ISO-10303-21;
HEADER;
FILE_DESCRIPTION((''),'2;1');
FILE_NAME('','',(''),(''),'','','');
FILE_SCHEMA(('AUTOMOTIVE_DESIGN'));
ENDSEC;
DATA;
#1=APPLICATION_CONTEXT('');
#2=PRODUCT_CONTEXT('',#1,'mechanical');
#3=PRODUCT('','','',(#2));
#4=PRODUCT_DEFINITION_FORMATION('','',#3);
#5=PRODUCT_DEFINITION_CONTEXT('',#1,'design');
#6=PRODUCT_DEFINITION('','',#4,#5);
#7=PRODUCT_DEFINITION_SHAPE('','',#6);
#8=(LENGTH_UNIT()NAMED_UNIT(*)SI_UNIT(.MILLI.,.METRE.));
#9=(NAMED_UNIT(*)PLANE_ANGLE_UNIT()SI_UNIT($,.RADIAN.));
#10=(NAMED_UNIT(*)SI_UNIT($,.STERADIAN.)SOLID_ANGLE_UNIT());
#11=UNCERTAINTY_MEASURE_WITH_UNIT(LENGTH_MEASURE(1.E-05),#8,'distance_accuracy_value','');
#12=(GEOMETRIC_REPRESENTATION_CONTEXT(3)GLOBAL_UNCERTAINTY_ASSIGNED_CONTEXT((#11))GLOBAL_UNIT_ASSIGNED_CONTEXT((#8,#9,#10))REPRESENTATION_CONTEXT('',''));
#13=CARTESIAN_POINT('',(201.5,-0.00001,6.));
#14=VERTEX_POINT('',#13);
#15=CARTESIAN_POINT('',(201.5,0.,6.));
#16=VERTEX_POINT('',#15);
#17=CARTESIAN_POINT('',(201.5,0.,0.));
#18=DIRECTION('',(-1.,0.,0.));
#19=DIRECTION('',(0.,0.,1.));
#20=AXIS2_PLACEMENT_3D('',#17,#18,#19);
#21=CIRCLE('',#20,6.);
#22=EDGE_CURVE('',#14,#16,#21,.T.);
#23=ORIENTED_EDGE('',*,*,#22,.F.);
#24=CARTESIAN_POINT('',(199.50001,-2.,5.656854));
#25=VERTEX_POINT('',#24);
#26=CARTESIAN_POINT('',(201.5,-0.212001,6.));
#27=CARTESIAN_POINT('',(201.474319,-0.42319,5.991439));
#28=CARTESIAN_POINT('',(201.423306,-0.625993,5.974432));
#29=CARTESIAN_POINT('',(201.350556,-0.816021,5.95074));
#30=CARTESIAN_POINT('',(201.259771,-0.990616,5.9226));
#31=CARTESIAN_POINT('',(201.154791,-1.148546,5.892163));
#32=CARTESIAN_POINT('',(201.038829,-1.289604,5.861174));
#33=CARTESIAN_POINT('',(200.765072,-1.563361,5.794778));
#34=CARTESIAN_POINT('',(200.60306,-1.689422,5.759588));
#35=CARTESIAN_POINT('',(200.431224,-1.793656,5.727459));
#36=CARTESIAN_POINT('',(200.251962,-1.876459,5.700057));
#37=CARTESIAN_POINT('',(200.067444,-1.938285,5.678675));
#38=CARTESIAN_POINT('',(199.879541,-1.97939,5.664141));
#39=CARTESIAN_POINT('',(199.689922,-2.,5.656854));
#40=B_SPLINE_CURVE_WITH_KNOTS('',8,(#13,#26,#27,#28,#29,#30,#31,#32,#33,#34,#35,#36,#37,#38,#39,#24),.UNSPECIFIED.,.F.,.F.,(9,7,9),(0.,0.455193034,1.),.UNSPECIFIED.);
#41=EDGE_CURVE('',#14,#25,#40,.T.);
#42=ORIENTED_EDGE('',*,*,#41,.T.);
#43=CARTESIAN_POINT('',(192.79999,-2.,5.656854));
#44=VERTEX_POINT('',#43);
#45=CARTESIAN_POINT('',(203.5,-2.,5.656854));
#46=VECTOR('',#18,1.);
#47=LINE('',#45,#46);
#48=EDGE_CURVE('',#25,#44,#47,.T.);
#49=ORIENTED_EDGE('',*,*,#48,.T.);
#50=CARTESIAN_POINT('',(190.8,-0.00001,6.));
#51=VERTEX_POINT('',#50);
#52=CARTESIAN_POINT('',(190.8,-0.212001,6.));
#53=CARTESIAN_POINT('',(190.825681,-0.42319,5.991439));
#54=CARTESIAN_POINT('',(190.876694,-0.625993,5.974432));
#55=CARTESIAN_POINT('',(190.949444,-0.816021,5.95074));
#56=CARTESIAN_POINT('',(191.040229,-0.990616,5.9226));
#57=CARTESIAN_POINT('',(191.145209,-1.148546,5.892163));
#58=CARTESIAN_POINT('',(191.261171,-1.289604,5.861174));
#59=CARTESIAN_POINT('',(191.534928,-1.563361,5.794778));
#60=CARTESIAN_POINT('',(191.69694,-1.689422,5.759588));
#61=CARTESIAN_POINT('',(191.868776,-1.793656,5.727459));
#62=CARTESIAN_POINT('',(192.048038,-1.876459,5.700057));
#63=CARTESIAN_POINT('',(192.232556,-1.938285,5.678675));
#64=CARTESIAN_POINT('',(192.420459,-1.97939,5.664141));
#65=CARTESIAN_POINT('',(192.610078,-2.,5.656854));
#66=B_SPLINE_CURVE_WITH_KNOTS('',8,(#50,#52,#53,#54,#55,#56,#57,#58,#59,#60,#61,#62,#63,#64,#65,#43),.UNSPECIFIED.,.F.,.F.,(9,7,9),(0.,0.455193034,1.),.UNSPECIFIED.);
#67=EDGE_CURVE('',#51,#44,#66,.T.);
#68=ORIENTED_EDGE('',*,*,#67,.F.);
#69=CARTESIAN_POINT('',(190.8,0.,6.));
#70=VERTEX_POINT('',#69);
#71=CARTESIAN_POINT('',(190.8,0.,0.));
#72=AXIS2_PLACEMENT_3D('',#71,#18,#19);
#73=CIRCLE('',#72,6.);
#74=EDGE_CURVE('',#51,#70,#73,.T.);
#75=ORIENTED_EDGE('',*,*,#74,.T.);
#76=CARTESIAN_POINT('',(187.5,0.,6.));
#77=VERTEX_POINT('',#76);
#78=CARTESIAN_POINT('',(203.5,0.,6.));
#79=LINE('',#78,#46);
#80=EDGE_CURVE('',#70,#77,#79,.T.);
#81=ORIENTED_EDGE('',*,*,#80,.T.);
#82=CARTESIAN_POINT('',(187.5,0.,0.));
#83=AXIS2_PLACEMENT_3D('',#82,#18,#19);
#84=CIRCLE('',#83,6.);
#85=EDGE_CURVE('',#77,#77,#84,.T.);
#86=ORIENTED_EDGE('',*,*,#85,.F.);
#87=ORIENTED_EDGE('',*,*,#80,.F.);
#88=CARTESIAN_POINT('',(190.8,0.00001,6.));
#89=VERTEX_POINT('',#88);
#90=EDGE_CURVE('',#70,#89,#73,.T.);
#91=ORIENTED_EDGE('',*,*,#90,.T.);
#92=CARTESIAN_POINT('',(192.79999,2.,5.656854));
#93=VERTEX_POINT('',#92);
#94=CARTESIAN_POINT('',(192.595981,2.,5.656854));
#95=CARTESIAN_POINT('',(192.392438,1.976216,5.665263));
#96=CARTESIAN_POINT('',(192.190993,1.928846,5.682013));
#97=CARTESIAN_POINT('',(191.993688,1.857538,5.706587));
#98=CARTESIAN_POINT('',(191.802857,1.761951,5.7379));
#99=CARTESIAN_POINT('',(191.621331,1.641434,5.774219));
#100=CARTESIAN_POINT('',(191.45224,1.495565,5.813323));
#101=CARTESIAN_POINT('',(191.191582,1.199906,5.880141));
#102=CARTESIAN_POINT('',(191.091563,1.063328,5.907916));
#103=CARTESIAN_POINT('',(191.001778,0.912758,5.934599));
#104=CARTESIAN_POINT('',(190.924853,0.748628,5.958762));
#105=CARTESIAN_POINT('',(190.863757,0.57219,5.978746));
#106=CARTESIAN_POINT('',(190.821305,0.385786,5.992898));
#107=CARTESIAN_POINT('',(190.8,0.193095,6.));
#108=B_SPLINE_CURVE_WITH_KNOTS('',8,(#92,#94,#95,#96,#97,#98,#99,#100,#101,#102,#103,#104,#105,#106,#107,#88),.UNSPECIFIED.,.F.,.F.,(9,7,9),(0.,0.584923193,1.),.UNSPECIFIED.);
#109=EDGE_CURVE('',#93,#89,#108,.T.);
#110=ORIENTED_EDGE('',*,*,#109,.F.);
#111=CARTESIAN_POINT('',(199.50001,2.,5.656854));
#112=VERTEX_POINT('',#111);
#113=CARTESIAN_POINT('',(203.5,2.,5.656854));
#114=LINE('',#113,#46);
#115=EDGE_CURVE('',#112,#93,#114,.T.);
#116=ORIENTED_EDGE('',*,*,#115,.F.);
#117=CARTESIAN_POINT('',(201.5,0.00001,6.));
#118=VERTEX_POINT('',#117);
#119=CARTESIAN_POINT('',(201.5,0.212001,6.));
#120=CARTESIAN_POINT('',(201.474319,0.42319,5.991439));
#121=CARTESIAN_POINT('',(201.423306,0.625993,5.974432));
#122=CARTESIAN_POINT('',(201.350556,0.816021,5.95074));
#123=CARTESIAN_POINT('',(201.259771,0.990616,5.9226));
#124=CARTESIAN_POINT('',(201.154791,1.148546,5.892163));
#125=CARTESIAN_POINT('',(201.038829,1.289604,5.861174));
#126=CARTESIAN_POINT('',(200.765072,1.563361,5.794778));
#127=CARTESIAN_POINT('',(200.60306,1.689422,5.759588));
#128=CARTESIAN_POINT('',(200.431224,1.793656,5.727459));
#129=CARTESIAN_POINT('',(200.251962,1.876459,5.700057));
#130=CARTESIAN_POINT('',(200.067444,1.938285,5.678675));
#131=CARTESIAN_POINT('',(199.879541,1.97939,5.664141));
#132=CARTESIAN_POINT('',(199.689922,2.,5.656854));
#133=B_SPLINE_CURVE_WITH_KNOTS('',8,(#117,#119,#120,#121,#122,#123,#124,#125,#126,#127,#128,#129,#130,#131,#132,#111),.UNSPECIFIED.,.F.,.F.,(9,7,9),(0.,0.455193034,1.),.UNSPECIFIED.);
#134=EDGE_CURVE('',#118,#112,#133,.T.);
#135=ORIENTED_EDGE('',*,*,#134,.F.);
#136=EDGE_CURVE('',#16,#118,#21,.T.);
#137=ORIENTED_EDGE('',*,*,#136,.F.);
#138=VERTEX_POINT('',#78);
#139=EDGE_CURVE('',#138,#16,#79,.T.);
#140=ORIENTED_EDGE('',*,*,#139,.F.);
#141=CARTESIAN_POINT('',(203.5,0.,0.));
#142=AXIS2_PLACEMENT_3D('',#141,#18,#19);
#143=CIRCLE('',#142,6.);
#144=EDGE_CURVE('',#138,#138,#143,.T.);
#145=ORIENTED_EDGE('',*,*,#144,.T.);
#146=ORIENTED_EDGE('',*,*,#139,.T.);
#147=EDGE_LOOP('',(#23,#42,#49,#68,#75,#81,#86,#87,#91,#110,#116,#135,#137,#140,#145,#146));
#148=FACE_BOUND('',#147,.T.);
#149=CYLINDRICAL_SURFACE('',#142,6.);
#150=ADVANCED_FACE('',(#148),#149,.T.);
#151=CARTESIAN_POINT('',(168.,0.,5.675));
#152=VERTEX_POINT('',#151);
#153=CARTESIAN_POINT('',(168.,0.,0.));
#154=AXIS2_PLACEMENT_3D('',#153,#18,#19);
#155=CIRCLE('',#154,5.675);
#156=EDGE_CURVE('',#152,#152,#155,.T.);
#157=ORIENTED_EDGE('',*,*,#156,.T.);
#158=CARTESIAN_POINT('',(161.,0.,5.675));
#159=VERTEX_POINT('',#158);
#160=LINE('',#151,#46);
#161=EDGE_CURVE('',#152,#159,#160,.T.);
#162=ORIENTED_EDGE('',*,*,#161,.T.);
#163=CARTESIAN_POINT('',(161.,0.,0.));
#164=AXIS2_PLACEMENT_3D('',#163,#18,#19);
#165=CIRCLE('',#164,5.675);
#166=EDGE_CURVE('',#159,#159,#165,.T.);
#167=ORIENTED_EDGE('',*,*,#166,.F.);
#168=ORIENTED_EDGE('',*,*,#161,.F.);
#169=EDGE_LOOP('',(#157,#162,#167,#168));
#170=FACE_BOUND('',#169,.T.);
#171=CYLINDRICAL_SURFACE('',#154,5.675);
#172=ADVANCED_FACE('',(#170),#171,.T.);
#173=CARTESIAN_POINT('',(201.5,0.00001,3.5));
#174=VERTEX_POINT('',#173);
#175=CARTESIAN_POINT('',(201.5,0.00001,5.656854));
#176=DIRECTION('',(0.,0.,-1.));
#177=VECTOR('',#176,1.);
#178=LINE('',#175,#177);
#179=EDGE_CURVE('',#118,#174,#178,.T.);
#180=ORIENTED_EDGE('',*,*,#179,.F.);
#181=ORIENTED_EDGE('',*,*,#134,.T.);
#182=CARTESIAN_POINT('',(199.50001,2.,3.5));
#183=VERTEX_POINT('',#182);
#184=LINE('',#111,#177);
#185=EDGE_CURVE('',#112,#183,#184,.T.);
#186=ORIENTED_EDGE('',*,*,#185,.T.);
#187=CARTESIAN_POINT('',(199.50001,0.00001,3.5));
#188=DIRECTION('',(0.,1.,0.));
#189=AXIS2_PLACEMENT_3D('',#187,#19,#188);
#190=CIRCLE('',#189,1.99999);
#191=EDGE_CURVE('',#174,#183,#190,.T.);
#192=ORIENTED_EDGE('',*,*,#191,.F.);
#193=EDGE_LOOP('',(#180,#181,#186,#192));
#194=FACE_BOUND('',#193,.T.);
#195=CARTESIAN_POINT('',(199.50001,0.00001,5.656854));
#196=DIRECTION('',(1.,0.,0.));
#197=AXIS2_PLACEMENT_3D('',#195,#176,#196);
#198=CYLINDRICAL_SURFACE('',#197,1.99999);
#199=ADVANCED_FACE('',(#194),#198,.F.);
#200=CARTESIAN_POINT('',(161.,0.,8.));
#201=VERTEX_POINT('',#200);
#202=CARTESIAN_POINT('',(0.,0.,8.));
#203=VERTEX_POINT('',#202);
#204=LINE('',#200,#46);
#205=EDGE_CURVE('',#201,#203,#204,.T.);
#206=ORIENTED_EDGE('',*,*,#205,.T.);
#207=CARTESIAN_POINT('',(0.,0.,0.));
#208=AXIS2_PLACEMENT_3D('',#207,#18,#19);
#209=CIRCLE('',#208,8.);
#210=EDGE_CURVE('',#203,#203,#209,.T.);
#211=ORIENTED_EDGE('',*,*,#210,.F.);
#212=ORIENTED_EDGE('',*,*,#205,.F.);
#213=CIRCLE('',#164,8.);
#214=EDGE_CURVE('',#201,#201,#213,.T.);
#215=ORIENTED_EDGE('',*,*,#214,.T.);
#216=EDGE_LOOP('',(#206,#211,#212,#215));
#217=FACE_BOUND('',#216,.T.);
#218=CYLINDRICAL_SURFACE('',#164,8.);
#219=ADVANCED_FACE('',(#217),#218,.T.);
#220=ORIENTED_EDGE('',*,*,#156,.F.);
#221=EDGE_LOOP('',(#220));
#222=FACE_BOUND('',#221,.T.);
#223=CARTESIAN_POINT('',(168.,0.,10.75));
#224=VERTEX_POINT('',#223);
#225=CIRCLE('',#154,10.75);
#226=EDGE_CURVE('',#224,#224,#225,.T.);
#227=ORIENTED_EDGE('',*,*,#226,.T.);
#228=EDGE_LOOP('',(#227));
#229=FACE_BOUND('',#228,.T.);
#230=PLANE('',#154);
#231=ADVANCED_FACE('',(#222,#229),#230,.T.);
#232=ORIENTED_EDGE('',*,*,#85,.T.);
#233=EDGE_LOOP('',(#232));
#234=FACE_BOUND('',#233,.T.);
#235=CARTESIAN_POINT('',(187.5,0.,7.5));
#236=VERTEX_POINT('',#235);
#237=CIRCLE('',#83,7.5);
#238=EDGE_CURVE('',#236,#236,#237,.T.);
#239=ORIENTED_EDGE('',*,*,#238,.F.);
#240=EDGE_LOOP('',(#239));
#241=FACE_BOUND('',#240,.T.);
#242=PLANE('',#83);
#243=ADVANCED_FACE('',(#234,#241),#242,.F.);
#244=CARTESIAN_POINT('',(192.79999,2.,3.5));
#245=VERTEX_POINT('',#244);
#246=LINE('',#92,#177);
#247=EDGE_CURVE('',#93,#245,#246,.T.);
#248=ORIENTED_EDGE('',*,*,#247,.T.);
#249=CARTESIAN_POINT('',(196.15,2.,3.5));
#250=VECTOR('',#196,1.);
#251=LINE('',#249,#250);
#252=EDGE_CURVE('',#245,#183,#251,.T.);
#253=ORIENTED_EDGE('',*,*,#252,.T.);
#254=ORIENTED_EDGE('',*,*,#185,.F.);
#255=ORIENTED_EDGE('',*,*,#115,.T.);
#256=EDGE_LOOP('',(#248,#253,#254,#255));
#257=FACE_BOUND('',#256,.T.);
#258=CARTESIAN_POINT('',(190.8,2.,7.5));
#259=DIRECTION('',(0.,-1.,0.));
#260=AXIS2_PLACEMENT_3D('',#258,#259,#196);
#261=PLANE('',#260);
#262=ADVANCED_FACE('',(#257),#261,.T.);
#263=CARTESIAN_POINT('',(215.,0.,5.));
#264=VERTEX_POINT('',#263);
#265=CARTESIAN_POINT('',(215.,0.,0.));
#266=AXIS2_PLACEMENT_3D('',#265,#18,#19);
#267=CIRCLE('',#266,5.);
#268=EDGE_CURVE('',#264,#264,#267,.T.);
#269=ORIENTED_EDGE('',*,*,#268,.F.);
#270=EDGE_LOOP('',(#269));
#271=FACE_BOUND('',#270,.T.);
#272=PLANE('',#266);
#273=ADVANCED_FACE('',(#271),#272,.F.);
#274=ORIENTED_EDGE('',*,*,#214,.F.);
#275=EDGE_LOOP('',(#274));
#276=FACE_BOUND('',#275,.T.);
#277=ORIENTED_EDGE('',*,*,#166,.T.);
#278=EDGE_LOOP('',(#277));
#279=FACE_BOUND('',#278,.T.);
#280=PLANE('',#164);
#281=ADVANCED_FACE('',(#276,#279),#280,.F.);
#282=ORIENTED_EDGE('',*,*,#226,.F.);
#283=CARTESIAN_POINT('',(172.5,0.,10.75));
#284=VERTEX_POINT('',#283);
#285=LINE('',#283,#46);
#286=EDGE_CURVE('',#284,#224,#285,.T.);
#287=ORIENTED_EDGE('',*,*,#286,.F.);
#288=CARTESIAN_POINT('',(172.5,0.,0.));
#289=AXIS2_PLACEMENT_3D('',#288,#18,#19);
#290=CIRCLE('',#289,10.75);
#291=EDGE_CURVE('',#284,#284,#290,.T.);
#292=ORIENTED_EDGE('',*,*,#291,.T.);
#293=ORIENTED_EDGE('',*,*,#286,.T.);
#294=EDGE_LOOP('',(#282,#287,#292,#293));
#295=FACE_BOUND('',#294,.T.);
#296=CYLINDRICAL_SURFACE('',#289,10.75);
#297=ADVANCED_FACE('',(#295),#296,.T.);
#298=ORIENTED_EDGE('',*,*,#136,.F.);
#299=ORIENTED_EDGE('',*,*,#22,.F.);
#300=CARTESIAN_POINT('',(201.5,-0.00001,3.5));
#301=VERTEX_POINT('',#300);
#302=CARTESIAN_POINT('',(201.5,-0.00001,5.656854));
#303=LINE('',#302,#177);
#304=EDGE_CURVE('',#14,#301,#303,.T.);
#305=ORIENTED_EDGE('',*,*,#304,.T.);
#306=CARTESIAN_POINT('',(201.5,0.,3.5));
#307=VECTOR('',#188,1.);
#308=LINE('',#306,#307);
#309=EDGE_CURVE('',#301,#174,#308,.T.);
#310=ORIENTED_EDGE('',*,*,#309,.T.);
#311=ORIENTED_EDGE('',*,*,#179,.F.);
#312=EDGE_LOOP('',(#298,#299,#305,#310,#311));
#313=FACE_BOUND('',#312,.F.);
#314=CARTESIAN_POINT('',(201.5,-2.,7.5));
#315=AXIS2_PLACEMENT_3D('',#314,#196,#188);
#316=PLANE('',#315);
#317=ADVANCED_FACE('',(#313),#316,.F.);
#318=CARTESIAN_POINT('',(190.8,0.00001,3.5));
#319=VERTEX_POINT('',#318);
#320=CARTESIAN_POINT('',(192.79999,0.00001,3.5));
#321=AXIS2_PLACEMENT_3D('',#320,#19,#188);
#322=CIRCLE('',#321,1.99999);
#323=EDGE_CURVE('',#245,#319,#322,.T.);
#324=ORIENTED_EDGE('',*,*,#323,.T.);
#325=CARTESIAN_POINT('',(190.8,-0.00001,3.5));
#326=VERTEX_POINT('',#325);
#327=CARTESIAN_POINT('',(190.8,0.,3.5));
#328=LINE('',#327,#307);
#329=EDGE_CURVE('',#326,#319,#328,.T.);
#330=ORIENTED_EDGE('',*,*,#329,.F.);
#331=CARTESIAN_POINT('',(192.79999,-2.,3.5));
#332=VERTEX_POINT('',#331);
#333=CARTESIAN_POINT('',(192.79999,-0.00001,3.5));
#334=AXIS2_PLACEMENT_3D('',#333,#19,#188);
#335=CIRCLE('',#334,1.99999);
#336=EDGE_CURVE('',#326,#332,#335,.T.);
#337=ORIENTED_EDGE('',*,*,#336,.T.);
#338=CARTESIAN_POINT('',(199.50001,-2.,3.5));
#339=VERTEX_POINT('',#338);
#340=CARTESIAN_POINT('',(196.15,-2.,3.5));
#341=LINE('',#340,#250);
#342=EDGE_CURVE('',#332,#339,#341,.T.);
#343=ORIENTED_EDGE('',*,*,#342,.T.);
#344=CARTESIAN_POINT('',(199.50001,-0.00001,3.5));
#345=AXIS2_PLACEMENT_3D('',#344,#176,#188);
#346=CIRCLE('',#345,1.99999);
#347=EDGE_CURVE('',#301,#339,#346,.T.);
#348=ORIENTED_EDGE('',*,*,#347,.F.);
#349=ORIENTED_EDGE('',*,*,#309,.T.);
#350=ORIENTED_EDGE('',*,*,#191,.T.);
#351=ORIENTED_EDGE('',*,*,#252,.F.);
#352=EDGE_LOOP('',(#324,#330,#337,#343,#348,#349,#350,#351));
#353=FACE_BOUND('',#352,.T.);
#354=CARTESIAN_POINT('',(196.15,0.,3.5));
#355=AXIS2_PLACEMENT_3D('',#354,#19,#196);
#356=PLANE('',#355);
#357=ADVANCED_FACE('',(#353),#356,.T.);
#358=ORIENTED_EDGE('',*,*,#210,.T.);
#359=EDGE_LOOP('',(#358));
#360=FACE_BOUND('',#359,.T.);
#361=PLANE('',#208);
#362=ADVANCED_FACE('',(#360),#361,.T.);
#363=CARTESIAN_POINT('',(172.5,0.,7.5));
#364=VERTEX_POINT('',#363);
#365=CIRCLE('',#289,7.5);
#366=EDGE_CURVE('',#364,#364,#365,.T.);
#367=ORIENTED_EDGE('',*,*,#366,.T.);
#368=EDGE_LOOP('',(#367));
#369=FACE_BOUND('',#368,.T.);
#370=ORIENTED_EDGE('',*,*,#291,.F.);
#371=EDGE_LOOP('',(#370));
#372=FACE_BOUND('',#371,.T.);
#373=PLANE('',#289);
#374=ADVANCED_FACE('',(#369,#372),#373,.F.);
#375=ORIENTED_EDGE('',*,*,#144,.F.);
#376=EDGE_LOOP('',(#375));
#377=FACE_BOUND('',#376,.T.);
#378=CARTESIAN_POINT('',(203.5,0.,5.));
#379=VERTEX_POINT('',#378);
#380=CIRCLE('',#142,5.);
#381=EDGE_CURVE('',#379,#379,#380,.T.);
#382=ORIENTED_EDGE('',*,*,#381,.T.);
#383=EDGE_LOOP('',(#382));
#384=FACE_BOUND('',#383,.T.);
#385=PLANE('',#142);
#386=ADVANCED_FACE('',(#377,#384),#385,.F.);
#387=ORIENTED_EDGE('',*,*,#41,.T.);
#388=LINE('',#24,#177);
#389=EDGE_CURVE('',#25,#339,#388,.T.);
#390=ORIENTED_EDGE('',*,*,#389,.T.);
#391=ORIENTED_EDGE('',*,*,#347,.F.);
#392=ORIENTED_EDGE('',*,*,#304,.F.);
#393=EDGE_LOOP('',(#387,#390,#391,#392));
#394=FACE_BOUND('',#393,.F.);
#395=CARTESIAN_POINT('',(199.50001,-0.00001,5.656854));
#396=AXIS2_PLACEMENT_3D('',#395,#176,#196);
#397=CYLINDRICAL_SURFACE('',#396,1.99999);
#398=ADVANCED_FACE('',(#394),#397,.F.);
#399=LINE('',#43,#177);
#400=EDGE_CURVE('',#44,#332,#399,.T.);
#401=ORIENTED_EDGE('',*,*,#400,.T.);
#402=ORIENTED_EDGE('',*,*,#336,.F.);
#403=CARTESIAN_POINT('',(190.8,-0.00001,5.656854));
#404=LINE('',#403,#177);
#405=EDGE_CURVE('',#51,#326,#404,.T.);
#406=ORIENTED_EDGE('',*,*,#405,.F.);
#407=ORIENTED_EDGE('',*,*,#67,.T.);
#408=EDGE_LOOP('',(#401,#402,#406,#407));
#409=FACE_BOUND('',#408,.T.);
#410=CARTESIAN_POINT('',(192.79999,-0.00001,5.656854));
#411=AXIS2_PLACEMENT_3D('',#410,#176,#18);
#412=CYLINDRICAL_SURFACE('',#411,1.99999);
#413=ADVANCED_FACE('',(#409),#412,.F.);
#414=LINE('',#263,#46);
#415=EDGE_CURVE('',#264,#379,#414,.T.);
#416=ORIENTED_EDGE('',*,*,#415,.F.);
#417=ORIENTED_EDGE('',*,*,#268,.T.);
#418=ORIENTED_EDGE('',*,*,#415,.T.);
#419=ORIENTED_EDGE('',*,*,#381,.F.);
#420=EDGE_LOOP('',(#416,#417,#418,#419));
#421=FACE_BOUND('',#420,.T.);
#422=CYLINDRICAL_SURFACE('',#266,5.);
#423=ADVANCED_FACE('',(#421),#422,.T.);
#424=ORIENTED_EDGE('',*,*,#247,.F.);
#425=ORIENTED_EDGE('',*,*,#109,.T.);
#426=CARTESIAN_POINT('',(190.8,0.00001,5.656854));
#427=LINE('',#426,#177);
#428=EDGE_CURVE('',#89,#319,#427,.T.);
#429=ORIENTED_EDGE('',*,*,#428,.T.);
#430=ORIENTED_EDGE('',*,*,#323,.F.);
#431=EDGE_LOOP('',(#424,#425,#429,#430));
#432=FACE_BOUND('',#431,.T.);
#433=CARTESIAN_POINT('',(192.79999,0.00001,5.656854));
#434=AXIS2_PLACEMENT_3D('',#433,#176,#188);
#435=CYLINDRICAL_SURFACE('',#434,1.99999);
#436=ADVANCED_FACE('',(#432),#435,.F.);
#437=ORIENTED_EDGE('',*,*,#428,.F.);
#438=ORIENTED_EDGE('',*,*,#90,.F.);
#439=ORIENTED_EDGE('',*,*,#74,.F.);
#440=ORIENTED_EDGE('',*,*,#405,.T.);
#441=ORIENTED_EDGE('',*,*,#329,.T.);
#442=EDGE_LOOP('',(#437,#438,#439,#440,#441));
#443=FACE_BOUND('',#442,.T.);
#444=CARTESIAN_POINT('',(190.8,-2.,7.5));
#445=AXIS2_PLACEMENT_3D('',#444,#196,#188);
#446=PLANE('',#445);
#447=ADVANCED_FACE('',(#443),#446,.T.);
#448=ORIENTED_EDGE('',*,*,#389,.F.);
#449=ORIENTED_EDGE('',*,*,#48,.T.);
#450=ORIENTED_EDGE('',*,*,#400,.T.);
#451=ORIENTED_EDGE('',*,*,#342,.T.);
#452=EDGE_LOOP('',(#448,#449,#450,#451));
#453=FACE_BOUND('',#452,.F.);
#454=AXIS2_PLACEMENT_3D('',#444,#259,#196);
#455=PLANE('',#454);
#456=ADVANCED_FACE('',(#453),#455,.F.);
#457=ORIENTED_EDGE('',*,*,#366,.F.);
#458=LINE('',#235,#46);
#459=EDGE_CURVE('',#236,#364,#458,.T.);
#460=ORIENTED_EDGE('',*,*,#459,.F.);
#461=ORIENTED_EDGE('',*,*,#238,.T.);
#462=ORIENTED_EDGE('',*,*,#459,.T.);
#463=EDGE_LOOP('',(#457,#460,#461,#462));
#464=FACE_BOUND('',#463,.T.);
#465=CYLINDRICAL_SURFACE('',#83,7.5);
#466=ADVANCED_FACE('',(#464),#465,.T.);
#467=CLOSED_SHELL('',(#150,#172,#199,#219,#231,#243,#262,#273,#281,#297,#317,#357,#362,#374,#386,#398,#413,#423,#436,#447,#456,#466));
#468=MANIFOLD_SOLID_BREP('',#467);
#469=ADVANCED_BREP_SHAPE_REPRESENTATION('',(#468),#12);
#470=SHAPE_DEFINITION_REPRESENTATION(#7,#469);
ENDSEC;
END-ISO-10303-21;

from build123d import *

# Parameters (mm, degrees)
F3_W     = 10.7
F3_H     = 4
F4_DEPTH = 4
F5_R     = 1.99999


# Not quite as in the source:
# - a fillet or chamfer is up to 0.001 mm smaller than in the source, because OpenCascade refuses the exact size


with BuildPart() as f1:
    # F0 (on Front) → F1 (revolve)
    with BuildSketch(Plane.XZ):
        Polygon((0, 8), (0, 0), (215, 0), (215, 5), (203.5, 5), (203.5, 6), (187.5, 6), (187.5, 7.5), (172.5, 7.5), (172.5, 10.75), (168, 10.75), (168, 5.675), (161, 5.675), (161, 8), align=None)
    revolve(axis=Axis((-30.1147408886, 0, 0), (-1, 0, 0)))

    # F3 (on offset) → F4 (cut)
    with BuildSketch(Plane.XY.offset(7.5)):
        with Locations((196.15, 0)):
            Rectangle(F3_W, F3_H)
    extrude(amount=-F4_DEPTH, mode=Mode.SUBTRACT)

    # F5 (radius 2 in the source; OpenCascade refuses exactly that, so slightly less here)
    f5_edges = [f1.edges().sort_by_distance(p)[0] for p in [
        (190.8, 2, 4.578427),
        (201.5, 2, 4.578427),
        (201.5, -2, 4.578427),
        (190.8, -2, 4.578427),
    ]]
    fillet(f5_edges, radius=F5_R)


solid = f1.part
